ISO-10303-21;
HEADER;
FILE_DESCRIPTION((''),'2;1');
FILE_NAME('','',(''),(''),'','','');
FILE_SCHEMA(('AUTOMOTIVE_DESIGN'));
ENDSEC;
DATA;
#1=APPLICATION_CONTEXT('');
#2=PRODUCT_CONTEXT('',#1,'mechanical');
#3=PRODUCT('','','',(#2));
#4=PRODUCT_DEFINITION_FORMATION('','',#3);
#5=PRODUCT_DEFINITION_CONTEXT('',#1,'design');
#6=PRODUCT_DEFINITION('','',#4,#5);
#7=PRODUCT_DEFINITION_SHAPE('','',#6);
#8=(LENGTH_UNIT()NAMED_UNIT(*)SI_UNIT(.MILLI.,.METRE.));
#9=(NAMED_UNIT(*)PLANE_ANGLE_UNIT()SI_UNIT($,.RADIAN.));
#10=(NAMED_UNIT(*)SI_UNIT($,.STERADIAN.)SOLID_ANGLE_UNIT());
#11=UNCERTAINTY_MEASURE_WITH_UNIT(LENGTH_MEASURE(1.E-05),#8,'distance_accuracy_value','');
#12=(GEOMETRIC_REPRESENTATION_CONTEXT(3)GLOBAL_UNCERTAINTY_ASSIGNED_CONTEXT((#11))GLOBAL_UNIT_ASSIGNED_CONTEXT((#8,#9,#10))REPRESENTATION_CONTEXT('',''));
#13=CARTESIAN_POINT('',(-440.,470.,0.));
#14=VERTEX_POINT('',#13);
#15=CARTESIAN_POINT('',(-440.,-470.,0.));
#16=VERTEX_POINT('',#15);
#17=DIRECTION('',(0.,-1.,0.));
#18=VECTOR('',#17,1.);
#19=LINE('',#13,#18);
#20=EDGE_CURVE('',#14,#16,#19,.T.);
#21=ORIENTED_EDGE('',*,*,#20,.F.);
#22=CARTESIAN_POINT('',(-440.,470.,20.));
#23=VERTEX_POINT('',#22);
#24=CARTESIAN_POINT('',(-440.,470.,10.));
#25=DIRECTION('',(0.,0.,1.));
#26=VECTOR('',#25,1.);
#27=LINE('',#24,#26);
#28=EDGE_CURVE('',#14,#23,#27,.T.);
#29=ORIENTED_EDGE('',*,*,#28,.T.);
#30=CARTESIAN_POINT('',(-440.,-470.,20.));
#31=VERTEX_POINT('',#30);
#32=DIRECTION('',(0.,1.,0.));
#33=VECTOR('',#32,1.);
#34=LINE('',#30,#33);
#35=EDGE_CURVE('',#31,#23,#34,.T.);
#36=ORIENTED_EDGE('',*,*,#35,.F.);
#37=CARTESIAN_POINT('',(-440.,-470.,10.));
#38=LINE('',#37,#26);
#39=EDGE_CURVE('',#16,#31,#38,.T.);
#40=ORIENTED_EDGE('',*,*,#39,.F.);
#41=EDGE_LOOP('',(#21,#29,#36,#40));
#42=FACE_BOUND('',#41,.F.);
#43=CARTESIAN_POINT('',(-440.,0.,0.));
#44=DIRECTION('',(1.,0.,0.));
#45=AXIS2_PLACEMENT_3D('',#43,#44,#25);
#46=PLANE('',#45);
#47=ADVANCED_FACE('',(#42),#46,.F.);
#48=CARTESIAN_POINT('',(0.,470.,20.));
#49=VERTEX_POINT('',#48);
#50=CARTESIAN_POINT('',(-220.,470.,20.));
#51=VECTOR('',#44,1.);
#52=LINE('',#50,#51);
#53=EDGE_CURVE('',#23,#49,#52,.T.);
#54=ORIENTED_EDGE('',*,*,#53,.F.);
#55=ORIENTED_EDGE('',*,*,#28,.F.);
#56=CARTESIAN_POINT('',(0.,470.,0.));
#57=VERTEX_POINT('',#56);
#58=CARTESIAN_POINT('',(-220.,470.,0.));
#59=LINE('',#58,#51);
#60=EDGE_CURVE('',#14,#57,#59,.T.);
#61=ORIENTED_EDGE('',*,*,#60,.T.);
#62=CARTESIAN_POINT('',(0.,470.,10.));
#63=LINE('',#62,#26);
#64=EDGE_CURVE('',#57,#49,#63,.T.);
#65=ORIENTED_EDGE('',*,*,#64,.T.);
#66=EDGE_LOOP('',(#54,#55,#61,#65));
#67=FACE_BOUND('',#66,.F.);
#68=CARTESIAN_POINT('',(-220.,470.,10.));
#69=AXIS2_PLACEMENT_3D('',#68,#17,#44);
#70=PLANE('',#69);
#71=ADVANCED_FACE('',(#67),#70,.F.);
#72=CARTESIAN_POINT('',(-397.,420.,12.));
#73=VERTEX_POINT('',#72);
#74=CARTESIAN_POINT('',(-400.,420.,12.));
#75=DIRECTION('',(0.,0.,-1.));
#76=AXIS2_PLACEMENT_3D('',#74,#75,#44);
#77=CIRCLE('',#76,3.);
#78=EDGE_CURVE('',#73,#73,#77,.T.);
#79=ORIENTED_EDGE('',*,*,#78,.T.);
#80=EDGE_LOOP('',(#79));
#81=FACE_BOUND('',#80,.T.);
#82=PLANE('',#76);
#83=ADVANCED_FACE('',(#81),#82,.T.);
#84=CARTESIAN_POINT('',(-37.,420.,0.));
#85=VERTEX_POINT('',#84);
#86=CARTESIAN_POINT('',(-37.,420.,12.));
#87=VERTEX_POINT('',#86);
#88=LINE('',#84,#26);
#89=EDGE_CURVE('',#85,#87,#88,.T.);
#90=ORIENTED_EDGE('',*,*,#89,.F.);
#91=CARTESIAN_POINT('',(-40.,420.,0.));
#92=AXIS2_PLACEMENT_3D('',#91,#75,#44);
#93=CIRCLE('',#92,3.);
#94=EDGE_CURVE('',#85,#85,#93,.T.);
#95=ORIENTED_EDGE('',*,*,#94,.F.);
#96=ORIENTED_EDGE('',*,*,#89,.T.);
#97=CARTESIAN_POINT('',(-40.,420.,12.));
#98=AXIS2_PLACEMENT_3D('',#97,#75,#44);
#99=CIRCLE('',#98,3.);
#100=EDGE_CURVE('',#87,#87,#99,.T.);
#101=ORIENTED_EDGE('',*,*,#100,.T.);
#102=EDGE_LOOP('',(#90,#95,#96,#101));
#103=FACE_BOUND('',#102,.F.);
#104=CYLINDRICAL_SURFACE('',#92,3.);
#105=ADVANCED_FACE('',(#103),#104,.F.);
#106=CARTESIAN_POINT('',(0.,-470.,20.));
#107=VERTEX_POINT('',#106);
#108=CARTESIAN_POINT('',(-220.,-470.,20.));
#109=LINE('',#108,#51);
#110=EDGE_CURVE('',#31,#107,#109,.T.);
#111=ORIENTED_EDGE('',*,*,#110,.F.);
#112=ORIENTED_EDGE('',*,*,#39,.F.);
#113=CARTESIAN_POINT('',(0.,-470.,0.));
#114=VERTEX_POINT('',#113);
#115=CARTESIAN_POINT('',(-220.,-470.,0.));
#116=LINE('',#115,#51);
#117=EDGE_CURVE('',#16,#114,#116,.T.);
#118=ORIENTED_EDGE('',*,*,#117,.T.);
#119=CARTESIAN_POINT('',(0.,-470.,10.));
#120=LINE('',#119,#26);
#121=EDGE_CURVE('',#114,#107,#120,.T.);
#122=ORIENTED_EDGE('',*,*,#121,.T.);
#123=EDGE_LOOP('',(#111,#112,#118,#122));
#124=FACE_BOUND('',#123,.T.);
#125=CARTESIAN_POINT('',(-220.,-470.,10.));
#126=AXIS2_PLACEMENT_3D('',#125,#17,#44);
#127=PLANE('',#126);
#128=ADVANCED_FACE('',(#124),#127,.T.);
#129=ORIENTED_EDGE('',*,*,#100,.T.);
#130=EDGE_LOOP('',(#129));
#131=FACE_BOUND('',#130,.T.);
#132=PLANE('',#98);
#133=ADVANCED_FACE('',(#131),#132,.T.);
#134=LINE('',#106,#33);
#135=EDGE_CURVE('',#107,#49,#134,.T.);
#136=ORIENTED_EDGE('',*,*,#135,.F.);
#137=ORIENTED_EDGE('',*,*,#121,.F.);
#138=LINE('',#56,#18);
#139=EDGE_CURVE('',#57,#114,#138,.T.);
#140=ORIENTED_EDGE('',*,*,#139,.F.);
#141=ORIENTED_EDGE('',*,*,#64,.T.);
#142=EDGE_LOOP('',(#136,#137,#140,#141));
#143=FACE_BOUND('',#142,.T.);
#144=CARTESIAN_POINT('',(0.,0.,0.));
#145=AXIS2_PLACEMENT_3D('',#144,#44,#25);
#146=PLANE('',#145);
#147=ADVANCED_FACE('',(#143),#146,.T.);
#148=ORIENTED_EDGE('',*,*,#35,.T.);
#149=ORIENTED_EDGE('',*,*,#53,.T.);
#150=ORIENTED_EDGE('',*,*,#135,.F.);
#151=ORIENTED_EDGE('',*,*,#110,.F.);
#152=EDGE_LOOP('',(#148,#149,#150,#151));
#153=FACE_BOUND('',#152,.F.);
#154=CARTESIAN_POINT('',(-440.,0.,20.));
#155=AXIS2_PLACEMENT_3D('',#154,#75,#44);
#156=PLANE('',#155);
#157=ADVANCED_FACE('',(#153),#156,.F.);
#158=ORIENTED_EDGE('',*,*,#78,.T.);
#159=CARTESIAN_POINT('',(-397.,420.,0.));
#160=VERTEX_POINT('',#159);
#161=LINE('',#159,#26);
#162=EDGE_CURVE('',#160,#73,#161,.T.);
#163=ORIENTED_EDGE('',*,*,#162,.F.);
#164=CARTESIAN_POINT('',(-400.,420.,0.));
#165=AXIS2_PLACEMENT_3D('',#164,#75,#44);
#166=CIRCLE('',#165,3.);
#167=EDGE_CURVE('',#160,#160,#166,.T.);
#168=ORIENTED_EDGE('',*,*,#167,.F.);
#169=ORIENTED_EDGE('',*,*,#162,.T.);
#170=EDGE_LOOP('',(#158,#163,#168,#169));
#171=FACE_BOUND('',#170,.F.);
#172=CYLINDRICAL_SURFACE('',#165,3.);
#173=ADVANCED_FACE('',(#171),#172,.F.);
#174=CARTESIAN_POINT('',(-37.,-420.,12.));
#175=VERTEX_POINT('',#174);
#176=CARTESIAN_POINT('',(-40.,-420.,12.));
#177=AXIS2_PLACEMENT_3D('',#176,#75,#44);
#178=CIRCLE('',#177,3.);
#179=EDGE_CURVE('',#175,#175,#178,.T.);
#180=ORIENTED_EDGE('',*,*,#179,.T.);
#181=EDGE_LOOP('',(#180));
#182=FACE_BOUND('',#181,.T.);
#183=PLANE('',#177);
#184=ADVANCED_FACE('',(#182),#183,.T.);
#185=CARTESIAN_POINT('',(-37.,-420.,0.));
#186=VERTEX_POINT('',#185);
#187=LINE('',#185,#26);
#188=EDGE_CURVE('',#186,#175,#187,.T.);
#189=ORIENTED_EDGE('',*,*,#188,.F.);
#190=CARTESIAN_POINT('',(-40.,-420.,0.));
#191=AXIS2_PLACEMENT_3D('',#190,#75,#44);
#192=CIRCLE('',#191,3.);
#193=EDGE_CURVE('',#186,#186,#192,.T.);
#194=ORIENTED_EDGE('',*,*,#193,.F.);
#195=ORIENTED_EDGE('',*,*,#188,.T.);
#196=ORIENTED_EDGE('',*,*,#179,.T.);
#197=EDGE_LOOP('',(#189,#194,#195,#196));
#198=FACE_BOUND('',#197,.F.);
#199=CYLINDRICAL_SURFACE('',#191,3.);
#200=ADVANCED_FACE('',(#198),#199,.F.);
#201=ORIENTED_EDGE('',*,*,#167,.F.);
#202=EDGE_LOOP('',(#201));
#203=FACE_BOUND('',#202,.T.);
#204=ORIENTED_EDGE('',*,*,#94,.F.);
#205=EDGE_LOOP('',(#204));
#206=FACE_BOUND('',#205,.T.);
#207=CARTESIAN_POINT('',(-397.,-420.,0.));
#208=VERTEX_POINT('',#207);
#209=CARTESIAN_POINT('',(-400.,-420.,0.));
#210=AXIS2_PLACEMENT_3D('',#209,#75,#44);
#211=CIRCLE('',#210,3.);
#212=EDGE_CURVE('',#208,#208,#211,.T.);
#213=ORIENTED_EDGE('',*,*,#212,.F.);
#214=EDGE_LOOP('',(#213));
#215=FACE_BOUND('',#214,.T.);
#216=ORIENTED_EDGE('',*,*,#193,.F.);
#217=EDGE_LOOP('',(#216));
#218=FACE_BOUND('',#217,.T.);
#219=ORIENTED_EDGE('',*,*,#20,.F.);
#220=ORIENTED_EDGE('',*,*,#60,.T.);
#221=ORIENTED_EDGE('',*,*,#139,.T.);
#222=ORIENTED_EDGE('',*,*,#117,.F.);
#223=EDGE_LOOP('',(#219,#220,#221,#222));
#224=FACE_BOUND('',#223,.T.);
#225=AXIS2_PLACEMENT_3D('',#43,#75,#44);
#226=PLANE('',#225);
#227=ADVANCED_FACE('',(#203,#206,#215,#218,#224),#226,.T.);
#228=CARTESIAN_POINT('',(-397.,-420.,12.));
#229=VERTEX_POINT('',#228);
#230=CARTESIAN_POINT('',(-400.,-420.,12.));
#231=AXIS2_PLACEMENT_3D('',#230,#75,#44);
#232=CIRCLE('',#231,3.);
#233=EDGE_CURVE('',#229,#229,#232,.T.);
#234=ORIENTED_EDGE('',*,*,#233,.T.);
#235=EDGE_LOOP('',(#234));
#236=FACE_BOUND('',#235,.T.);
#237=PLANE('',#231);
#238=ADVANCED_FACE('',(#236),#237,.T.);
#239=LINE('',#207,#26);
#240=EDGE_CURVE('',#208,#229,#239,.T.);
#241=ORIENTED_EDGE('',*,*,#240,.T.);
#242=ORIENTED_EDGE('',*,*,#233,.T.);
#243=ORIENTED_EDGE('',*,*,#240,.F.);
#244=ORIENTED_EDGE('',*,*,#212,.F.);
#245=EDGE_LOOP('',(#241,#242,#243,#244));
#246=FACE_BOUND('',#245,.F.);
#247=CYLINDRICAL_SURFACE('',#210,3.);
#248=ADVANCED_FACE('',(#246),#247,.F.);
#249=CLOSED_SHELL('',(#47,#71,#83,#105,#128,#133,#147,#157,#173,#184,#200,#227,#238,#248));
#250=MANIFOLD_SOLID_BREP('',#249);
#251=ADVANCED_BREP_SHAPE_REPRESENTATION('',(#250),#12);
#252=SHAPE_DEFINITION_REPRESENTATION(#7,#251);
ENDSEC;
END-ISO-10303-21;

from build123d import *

# Parameters (mm, degrees)
F0_W     = 440
F0_H     = 20
F1_DEPTH = 470
F2_R     = 3
F3_DEPTH = 12
F4_R     = 3
F5_DEPTH = 12
F6_R     = 3
F7_DEPTH = 12
F8_R     = 3
F9_DEPTH = 12


with BuildPart() as f1:
    # F0 (on Front) → F1 (new body, symmetric)
    with BuildSketch(Plane.XZ):
        with Locations((-220, 10)):
            Rectangle(F0_W, F0_H)
    extrude(amount=F1_DEPTH, both=True)

    # F2 (on face) → F3 (cut)
    with BuildSketch(Plane(origin=(0, 0, 0), x_dir=(1, 0, 0), z_dir=(0, 0, -1))):
        with Locations((-400, 420)):
            Circle(F2_R)
    extrude(amount=-F3_DEPTH, mode=Mode.SUBTRACT)

    # F4 (on face) → F5 (cut)
    with BuildSketch(Plane(origin=(0, 0, 0), x_dir=(1, 0, 0), z_dir=(0, 0, -1))):
        with Locations((-40, 420)):
            Circle(F4_R)
    extrude(amount=-F5_DEPTH, mode=Mode.SUBTRACT)

    # F6 (on face) → F7 (cut)
    with BuildSketch(Plane(origin=(0, 0, 0), x_dir=(1, 0, 0), z_dir=(0, 0, -1))):
        with Locations((-400, -420)):
            Circle(F6_R)
    extrude(amount=-F7_DEPTH, mode=Mode.SUBTRACT)

    # F8 (on face) → F9 (cut)
    with BuildSketch(Plane(origin=(0, 0, 0), x_dir=(1, 0, 0), z_dir=(0, 0, -1))):
        with Locations((-40, -420)):
            Circle(F8_R)
    extrude(amount=-F9_DEPTH, mode=Mode.SUBTRACT)


solid = f1.part
